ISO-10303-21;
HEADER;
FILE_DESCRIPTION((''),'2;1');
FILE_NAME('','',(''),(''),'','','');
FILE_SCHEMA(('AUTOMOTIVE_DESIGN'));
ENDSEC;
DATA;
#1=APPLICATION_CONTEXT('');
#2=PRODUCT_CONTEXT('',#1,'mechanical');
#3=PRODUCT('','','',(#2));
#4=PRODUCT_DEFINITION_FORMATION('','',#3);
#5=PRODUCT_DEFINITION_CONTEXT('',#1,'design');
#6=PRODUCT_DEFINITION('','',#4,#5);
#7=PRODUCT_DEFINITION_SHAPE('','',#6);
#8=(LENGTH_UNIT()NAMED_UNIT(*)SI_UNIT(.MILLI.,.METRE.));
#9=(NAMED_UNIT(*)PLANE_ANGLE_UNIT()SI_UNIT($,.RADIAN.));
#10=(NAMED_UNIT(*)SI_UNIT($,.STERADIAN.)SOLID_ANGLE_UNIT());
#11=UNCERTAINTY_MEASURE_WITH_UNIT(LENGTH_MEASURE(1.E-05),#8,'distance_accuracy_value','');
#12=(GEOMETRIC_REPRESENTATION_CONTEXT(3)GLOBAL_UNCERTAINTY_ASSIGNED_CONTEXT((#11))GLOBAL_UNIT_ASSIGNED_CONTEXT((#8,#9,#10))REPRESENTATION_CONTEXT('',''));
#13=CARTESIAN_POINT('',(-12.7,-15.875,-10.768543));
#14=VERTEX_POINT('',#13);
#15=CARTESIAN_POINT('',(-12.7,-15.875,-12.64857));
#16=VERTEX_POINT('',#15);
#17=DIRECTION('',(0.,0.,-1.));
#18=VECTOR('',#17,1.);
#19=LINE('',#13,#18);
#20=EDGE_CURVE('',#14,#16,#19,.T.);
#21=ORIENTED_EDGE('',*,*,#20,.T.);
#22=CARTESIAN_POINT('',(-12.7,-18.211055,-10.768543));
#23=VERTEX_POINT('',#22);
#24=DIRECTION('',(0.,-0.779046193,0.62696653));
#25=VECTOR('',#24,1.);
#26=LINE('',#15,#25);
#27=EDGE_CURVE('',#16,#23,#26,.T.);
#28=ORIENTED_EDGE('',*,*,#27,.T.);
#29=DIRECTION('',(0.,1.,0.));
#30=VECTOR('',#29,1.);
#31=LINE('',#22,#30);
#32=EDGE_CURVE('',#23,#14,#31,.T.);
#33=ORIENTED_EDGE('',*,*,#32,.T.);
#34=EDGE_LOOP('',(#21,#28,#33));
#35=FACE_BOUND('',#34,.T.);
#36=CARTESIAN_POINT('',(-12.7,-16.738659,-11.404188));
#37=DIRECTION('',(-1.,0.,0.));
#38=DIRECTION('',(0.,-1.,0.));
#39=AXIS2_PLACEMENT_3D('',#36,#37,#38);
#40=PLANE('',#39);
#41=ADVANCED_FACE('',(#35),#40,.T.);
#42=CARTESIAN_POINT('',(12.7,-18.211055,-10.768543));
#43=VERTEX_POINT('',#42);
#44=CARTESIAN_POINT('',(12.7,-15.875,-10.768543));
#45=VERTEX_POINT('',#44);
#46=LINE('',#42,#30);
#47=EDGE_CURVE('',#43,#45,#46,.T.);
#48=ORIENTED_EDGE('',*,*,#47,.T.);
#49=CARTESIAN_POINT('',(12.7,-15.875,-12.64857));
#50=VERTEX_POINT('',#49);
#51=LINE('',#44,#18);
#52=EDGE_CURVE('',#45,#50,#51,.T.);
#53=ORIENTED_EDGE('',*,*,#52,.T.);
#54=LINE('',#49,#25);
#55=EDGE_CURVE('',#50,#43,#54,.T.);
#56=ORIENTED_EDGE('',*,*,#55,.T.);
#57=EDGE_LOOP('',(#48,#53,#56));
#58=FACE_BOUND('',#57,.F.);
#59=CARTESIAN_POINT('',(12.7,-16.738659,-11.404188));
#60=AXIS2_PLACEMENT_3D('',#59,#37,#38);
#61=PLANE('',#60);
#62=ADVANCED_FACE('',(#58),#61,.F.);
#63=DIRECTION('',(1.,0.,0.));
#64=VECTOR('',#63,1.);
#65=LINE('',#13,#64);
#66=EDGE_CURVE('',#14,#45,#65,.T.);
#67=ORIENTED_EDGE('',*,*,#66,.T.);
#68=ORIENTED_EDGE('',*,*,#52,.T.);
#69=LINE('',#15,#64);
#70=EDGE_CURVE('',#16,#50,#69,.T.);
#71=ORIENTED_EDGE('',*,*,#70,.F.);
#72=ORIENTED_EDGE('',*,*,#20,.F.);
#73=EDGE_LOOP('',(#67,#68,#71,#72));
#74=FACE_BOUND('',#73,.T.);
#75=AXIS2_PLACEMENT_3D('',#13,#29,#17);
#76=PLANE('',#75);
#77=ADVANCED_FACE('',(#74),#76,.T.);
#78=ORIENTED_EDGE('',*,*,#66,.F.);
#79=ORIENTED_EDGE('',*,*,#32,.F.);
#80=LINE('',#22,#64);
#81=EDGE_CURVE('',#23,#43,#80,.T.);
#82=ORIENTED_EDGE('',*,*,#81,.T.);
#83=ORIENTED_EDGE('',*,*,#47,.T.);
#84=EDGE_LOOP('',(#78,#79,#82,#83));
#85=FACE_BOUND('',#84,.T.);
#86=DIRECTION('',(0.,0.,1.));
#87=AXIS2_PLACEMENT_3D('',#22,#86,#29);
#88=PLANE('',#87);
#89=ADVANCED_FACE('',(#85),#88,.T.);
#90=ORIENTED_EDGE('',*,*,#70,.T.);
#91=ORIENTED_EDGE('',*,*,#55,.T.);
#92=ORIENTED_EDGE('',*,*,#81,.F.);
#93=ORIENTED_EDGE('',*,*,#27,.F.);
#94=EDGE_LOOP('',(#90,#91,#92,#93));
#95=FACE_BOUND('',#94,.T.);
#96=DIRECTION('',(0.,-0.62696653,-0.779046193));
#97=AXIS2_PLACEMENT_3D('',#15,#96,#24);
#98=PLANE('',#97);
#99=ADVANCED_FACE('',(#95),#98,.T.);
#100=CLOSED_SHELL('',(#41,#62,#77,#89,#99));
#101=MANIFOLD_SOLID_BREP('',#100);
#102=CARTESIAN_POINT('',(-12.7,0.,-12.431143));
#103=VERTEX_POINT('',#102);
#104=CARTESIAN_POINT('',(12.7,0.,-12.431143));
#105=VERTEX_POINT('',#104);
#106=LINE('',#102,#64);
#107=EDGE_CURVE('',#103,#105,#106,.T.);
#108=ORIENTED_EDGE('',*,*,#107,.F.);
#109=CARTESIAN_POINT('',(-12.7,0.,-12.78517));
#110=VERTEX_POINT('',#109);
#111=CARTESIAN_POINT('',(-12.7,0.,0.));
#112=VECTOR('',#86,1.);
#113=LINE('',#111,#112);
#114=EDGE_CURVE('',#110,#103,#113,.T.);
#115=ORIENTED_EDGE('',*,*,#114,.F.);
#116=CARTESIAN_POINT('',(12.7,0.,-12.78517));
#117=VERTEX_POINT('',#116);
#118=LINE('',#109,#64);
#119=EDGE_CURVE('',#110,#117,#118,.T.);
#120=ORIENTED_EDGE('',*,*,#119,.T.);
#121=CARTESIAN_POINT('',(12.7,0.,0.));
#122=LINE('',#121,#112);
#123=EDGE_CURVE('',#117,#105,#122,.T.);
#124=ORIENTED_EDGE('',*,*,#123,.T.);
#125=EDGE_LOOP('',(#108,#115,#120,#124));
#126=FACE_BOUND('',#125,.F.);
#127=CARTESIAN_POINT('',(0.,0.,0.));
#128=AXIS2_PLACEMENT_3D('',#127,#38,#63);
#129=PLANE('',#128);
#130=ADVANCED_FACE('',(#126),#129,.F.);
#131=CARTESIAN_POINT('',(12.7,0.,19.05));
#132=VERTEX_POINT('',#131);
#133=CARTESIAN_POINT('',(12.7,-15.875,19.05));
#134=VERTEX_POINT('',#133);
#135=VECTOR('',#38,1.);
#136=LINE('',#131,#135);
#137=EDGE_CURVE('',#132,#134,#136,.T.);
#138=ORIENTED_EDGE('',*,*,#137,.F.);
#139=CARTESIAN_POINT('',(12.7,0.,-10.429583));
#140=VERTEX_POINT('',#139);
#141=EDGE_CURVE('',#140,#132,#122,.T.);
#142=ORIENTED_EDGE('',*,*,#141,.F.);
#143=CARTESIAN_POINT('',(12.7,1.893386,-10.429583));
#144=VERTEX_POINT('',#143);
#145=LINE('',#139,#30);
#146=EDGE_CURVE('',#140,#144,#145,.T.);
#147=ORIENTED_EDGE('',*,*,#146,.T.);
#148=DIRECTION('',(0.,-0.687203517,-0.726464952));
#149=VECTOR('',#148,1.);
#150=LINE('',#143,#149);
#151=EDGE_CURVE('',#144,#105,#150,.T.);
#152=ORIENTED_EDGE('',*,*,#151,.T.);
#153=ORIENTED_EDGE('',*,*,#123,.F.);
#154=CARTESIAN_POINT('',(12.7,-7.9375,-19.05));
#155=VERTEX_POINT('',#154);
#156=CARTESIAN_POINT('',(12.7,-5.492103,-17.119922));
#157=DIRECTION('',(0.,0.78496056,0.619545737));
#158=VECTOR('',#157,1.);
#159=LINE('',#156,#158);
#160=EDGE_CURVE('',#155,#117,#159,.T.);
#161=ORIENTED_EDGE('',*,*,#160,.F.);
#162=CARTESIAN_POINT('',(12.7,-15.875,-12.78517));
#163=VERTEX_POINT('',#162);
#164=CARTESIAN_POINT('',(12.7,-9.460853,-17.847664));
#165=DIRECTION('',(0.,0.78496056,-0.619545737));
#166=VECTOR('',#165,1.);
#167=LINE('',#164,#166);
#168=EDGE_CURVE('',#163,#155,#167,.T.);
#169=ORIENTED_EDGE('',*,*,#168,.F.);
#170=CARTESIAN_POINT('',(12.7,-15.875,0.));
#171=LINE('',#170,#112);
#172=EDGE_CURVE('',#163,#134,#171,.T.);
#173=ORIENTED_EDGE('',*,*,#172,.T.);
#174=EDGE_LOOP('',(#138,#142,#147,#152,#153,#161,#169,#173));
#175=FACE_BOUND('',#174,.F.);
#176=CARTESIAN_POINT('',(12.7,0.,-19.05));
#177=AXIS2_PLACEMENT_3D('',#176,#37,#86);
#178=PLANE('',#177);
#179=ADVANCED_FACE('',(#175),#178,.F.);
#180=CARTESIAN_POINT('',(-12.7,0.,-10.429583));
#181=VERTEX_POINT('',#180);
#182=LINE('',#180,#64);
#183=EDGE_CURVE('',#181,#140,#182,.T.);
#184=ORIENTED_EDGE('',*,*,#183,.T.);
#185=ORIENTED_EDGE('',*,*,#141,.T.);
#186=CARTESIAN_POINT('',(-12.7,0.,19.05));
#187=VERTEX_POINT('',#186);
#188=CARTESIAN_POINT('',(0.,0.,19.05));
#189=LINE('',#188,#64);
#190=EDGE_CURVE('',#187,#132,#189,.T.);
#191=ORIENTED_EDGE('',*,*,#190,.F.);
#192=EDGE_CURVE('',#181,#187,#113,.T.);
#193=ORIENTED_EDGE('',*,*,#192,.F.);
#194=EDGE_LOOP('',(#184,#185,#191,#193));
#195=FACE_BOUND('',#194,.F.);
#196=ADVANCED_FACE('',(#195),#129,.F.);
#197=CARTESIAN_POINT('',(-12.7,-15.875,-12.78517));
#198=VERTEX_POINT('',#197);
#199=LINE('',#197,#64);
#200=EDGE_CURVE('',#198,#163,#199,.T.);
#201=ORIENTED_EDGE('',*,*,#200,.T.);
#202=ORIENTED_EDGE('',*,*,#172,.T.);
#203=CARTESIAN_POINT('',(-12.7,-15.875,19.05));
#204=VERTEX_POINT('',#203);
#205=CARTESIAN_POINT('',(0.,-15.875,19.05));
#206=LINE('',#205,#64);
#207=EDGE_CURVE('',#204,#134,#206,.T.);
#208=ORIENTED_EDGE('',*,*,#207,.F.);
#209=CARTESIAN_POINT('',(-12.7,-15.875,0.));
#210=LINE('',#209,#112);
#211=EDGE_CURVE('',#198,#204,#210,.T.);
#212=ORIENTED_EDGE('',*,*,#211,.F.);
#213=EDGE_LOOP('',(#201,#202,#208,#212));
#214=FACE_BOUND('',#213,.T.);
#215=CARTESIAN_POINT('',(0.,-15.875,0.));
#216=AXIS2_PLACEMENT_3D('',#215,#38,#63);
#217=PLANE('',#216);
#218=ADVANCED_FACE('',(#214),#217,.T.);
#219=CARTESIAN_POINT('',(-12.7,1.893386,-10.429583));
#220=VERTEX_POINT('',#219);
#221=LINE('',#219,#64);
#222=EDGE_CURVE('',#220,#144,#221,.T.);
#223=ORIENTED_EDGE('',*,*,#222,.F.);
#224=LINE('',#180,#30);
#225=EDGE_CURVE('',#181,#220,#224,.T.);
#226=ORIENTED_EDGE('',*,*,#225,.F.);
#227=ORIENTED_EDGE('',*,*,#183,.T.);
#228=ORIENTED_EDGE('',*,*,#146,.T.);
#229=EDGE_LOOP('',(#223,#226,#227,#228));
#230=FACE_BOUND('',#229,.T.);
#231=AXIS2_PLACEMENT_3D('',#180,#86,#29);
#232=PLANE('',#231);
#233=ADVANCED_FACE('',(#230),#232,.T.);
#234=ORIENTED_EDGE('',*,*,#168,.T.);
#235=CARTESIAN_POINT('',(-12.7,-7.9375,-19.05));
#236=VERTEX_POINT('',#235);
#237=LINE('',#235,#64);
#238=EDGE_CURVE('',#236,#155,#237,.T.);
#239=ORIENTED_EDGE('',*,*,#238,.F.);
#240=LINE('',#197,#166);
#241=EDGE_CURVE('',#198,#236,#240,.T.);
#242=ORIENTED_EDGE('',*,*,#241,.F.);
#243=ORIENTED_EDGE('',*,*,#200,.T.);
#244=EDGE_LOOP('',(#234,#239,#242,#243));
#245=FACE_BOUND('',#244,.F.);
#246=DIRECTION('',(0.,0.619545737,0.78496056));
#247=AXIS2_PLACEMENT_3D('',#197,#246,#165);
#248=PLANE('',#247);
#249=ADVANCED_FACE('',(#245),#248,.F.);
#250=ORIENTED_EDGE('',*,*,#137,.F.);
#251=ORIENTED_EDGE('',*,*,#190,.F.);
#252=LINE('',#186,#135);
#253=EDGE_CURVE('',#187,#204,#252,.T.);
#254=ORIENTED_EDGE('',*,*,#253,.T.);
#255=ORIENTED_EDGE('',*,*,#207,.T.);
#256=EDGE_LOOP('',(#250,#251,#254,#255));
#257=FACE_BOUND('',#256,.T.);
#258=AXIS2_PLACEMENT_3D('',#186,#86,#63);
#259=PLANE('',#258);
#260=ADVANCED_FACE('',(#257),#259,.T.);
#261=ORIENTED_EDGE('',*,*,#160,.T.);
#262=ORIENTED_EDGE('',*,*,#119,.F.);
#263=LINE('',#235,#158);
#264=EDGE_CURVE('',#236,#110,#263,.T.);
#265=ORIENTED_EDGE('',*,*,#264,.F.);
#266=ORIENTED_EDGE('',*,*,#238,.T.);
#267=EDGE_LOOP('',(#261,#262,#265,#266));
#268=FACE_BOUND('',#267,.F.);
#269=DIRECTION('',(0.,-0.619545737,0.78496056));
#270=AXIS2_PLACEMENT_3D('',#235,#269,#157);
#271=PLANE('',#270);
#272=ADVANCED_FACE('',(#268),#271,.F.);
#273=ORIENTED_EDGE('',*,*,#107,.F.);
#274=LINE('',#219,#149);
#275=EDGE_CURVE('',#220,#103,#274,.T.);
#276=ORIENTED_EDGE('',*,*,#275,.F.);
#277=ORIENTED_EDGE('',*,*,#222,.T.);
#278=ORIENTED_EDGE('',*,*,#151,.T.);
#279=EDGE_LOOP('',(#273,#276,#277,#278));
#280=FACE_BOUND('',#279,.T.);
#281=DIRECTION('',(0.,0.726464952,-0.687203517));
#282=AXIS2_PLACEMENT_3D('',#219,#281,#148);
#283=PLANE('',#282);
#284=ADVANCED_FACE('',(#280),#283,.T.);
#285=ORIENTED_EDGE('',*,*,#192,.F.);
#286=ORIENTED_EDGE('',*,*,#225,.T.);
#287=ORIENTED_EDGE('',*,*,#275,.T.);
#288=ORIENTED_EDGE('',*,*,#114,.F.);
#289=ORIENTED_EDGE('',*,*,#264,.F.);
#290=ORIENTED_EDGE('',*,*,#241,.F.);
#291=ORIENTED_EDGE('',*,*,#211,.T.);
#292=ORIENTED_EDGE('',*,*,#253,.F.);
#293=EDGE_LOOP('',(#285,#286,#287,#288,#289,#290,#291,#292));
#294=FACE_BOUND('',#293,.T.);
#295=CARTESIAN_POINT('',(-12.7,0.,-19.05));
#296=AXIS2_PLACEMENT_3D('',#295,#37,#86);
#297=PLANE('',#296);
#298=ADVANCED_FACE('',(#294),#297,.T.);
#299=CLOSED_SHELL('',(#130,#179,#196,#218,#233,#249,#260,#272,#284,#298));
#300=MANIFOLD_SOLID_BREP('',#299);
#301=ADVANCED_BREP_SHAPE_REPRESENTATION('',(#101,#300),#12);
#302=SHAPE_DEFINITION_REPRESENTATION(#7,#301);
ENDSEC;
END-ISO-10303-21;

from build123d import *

# Parameters (mm, degrees)
F0_W      = 25.4
F0_H      = 38.1
F1_DEPTH  = 15.875
F3_DEPTH  = 50.8
F5_DEPTH  = 50.8
F7_DEPTH  = 25.4
F10_DEPTH = 25.4


# Not quite as in the source:
# - a feature names something its author has since deleted; it is built from what else it names


with BuildPart() as f1:
    # F0 (on Front) → F1 (new body)
    with BuildSketch(Plane.XZ):
        Rectangle(F0_W, F0_H)
    extrude(amount=F1_DEPTH)

    # F2 (on face) → F3 (cut)
    with BuildSketch(Plane(origin=(-12.7, 0, 0), x_dir=(0, -1, 0), z_dir=(-1, 0, 0))):
        Polygon((15.875, -12.7851702273), (7.9375, -19.05), (15.875, -19.05), align=None)
    extrude(amount=-F3_DEPTH, mode=Mode.SUBTRACT)

    # F4 (on face) → F5 (cut)
    with BuildSketch(Plane(origin=(-12.7, 0, 0), x_dir=(0, -1, 0), z_dir=(-1, 0, 0))):
        Polygon((7.9375, -19.05), (0, -12.7851702273), (0, -19.05), align=None)
    extrude(amount=-F5_DEPTH, mode=Mode.SUBTRACT)

    # F6 (on face) → F7 (join)
    with BuildSketch(Plane(origin=(-12.7, 0, 0), x_dir=(0, -1, 0), z_dir=(-1, 0, 0))):
        Polygon((0, -12.4311430186), (0, -10.4295834899), (-1.8933862448, -10.4295834899), align=None)
    extrude(amount=-F7_DEPTH)


with BuildPart() as f10:
    # F9 (on face) → F10 (new body)
    with BuildSketch(Plane(origin=(-12.7, 0, 0), x_dir=(0, -1, 0), z_dir=(-1, 0, 0))):
        Polygon((18.2110549376, -10.7685425392), (15.875, -10.7685425392), (15.875, -12.64857003), align=None)
    extrude(amount=-F10_DEPTH)


solid = Compound([f1.part, f10.part])
